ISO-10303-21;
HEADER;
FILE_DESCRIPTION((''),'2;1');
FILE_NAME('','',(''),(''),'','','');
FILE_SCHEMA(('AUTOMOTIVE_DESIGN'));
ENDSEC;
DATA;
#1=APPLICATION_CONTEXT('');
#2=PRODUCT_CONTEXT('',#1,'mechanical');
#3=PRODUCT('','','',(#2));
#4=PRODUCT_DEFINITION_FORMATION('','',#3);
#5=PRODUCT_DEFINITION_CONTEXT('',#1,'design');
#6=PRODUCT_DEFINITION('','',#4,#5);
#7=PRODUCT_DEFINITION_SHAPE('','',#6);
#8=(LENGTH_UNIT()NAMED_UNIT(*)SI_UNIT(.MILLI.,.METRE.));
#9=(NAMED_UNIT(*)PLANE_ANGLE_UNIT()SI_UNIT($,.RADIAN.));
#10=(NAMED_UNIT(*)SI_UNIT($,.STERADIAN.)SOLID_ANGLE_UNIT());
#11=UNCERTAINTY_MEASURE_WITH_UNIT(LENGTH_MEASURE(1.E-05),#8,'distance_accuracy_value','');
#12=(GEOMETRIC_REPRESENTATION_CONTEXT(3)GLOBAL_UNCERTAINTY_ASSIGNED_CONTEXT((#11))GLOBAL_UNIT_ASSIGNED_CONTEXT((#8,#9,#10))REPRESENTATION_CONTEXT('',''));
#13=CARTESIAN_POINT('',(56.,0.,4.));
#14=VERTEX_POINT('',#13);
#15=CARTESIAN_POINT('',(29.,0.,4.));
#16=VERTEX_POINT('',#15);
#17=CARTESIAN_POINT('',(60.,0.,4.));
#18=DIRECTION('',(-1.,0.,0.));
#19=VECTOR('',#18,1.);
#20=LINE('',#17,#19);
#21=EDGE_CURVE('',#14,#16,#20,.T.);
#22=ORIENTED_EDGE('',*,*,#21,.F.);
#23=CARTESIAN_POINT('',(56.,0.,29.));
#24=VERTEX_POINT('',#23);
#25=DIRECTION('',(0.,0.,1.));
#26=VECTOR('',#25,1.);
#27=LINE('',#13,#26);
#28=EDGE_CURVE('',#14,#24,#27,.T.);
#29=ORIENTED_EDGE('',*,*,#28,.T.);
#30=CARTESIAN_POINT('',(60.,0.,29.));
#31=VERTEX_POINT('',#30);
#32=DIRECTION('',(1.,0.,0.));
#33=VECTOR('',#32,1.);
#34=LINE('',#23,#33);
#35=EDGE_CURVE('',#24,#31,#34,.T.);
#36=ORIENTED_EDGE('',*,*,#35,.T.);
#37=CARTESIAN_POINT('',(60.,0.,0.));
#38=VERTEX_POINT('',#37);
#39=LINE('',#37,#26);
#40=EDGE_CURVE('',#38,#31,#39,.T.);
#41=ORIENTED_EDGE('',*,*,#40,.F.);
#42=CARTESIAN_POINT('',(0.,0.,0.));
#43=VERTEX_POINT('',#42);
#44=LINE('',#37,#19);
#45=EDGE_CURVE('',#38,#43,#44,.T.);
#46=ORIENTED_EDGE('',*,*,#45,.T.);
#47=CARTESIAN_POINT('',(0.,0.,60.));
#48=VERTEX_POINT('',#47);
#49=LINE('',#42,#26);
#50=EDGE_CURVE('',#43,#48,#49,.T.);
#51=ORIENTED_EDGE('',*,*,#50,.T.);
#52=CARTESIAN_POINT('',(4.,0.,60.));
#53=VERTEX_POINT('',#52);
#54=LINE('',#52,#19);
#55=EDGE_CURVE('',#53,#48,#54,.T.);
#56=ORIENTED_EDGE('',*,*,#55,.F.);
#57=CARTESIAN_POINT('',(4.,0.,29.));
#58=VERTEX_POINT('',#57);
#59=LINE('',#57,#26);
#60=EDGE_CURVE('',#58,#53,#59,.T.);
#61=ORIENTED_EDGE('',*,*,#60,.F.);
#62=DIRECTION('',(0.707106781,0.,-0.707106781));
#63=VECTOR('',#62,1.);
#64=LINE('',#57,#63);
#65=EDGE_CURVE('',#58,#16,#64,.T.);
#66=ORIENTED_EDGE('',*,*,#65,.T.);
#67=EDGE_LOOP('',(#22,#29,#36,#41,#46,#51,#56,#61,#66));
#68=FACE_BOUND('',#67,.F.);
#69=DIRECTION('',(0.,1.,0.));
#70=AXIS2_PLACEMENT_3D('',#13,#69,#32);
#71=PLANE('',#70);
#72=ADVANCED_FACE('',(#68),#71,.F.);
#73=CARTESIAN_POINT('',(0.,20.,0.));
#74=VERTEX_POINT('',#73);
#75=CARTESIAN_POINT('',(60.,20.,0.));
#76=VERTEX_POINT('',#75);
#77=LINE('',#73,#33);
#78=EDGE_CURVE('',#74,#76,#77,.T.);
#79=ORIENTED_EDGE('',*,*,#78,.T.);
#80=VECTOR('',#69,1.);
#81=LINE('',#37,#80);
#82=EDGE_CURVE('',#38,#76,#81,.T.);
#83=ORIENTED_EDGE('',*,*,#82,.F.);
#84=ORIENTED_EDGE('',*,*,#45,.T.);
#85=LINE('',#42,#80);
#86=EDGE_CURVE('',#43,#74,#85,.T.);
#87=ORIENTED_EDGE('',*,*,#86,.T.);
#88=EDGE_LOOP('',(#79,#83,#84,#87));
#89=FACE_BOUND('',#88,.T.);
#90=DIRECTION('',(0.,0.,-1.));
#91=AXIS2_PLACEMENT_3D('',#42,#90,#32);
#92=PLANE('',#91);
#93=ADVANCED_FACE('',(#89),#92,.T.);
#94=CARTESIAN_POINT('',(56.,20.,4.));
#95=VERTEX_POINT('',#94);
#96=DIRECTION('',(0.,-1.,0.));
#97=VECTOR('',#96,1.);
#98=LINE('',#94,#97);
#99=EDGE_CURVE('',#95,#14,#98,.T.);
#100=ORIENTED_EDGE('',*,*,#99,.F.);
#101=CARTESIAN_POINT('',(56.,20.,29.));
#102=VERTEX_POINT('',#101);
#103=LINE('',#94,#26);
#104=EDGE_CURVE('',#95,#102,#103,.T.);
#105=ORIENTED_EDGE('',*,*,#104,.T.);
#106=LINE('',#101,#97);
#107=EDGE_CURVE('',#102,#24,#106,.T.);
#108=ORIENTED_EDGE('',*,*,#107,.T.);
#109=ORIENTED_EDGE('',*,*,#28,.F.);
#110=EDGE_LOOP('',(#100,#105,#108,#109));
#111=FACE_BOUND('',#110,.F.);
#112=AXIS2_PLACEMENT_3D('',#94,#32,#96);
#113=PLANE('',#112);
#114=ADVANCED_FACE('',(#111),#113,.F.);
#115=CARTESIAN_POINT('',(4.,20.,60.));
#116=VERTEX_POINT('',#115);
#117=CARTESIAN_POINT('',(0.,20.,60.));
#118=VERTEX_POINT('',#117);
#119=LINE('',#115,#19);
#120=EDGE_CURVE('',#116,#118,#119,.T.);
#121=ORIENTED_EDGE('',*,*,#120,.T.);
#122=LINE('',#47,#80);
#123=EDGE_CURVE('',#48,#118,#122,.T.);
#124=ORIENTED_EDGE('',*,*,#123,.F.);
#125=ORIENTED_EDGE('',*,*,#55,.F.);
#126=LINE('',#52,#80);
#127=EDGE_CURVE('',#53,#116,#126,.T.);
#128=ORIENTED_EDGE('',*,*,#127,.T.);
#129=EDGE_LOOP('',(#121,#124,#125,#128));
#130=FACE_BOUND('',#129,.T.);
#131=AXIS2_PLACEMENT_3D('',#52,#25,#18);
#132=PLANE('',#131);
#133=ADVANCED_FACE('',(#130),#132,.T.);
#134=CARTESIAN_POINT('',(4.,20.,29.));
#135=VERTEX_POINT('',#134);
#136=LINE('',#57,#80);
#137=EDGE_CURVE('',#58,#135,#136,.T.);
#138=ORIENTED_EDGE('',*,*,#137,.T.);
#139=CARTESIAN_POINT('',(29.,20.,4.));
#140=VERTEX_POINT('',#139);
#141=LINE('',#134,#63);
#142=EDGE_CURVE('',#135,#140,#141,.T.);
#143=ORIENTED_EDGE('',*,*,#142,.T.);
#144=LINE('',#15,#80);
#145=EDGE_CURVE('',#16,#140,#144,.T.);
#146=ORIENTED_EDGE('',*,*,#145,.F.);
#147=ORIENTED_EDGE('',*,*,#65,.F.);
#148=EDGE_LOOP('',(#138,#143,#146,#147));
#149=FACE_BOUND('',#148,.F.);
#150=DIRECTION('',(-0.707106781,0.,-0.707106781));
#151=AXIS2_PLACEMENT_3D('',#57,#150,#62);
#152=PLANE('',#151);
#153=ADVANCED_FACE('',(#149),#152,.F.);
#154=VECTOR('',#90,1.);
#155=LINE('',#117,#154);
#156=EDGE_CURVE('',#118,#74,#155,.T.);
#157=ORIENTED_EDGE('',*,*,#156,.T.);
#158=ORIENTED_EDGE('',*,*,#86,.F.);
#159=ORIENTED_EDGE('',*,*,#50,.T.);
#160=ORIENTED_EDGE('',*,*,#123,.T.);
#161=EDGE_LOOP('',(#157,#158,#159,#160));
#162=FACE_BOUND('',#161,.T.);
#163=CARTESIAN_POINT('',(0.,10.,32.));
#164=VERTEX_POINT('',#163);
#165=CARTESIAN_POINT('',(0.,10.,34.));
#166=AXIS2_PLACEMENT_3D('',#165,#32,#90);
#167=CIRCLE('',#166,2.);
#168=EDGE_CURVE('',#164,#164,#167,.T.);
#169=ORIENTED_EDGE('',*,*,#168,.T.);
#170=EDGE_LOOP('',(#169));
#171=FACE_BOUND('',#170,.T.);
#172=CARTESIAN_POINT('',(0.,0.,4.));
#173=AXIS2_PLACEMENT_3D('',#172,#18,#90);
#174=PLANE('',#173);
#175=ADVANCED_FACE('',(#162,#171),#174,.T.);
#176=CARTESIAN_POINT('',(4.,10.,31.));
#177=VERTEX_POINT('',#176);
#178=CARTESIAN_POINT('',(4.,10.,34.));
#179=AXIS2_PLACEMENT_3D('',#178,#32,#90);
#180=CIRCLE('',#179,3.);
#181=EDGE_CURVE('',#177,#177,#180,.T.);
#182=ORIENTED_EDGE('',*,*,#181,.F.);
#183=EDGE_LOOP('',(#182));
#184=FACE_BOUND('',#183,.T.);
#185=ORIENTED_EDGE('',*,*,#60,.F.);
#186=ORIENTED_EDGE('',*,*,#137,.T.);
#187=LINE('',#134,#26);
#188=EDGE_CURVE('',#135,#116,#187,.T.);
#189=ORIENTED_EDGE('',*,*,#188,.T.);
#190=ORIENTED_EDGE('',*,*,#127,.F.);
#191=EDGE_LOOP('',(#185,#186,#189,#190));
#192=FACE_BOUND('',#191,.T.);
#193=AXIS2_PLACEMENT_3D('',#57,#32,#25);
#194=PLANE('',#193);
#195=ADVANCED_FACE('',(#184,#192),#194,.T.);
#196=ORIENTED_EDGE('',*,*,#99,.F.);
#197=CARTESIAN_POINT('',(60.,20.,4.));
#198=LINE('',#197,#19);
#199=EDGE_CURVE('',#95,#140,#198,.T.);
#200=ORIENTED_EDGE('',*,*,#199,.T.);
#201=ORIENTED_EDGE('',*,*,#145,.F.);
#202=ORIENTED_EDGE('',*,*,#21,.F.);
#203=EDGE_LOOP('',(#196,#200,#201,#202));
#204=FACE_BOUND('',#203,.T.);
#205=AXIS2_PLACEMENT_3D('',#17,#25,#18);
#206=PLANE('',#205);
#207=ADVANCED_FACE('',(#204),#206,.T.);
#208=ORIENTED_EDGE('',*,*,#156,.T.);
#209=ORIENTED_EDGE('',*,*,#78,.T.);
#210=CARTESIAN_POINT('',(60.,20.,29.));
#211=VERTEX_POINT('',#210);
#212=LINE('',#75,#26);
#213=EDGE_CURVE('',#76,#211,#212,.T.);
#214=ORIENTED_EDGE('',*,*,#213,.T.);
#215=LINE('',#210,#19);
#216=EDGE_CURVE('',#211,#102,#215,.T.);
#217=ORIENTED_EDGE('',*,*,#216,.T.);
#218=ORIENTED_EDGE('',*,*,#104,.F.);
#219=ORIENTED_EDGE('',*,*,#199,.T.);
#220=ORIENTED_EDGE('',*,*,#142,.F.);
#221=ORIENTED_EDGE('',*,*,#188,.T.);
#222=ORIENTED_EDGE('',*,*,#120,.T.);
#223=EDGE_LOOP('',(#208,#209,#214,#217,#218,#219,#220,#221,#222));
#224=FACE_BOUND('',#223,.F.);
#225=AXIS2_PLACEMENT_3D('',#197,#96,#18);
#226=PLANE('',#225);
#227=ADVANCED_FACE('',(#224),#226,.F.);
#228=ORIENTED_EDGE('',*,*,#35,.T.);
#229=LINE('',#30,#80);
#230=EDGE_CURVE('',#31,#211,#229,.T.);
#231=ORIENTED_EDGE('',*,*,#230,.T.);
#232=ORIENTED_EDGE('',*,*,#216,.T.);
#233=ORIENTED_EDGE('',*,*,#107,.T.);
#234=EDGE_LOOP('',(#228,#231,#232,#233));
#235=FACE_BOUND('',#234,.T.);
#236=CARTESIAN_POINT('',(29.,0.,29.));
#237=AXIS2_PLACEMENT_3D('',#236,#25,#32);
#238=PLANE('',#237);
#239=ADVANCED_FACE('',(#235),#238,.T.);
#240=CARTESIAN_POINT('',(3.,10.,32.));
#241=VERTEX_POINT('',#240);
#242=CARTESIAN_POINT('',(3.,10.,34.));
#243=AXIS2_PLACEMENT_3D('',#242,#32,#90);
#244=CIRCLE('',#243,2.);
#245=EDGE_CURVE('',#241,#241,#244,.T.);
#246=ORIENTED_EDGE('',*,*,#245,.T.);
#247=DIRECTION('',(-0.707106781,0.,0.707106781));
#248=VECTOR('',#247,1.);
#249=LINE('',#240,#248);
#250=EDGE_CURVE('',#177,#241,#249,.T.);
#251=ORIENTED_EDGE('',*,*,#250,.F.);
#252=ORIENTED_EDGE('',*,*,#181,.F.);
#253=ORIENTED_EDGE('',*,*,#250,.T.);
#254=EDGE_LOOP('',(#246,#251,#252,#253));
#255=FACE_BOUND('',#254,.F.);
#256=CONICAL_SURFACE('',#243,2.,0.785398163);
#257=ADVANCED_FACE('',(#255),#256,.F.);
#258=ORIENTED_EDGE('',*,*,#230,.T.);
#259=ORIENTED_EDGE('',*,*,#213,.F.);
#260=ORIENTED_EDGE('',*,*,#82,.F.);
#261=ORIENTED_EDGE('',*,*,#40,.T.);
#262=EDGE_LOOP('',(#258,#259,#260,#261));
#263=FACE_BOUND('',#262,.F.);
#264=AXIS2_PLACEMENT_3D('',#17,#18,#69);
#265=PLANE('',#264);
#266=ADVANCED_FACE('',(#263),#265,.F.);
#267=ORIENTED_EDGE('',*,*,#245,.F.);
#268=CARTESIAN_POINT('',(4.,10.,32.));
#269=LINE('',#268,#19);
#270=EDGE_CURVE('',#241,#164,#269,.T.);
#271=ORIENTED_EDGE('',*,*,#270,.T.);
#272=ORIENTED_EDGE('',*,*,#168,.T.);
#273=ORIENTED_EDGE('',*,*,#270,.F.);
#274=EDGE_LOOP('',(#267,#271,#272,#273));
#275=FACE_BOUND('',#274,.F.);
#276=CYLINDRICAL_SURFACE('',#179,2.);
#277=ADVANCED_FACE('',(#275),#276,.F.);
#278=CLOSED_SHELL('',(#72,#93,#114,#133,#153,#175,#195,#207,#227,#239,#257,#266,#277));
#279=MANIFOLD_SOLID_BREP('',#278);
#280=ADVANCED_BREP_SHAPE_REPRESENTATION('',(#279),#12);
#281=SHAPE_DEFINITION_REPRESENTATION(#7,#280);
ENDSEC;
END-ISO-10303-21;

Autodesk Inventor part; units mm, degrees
ref_plane "YZ Plane" through (0, 0, 0) normal (1, 0, 0) x (0, 1, 0)
ref_plane "XZ Plane" through (0, 0, 0) normal (0, 1, 0) x (-1, 0, 0)
ref_plane "XY Plane" through (0, 0, 0) normal (0, 0, 1) x (1, 0, 0)
sketch "Эскиз1" plane through (0, 0, 0) normal (0, 1, 0) x (-1, 0, 0)
  line L0 (0, 0) -> (-4, 0)
  line L1 (-4, 29) -> (-4, 60)
  line L2 (-4, 60) -> (0, 60)
  line L3 (0, 60) -> (0, 0)
  line L4 (0, 0) -> (-60, 0)
  line L5 (-60, 0) -> (-60, 4)
  line L6 (-60, 4) -> (-29, 4)
  line L7 (0, 4) -> (0, 0)
  line L8 (-4, 29) -> (-29, 4)
  dimension "d0" = 4
  dimension "d1" = 60
  dimension "d2" = 60
  dimension "d3" = 4
  dimension "d4" = 25
  dimension "d5" = 25
extrude "Выдавливание1" add sketch "Эскиз1" along normal blind 20
sketch "Эскиз2" plane through (4, 0, 60) normal (1, 0, 0) x (0, 0, -1)
  line L0 (0, 20) -> (31, 20) projected
  line L1 (0, 0) -> (0, 20) projected
  circle A0 centre (26, 10) radius 2
  line L2 (31, 0) -> (31, 20) projected
  point P0 (60, 0)
  dimension "d11" = 4
  dimension "d12" = 5
extrude "Выдавливание2" cut sketch "Эскиз2" against normal blind 10
chamfer "Фаска1" distance 1 angle 45 1 edges at (4, 10, 36)
sketch "Эскиз3" plane through (29, 0, 4) normal (0, 0, 1) x (1, 0, 0)
  line L0 (31, 0) -> (31, 20) projected
  line L1 (31, 20) -> (27, 20)
  line L2 (27, 20) -> (27, 0)
  line L3 (27, 0) -> (31, 0)
  line L4 (31, 0) -> (31, 20)
  line L5 (0, 0) -> (31, 0) projected
  point P0 (-29, 0)
  point P1 (29, 0)
  dimension "d18" = 4
extrude "Выдавливание3" add sketch "Эскиз3" along normal blind 25
properties part number "corner"
